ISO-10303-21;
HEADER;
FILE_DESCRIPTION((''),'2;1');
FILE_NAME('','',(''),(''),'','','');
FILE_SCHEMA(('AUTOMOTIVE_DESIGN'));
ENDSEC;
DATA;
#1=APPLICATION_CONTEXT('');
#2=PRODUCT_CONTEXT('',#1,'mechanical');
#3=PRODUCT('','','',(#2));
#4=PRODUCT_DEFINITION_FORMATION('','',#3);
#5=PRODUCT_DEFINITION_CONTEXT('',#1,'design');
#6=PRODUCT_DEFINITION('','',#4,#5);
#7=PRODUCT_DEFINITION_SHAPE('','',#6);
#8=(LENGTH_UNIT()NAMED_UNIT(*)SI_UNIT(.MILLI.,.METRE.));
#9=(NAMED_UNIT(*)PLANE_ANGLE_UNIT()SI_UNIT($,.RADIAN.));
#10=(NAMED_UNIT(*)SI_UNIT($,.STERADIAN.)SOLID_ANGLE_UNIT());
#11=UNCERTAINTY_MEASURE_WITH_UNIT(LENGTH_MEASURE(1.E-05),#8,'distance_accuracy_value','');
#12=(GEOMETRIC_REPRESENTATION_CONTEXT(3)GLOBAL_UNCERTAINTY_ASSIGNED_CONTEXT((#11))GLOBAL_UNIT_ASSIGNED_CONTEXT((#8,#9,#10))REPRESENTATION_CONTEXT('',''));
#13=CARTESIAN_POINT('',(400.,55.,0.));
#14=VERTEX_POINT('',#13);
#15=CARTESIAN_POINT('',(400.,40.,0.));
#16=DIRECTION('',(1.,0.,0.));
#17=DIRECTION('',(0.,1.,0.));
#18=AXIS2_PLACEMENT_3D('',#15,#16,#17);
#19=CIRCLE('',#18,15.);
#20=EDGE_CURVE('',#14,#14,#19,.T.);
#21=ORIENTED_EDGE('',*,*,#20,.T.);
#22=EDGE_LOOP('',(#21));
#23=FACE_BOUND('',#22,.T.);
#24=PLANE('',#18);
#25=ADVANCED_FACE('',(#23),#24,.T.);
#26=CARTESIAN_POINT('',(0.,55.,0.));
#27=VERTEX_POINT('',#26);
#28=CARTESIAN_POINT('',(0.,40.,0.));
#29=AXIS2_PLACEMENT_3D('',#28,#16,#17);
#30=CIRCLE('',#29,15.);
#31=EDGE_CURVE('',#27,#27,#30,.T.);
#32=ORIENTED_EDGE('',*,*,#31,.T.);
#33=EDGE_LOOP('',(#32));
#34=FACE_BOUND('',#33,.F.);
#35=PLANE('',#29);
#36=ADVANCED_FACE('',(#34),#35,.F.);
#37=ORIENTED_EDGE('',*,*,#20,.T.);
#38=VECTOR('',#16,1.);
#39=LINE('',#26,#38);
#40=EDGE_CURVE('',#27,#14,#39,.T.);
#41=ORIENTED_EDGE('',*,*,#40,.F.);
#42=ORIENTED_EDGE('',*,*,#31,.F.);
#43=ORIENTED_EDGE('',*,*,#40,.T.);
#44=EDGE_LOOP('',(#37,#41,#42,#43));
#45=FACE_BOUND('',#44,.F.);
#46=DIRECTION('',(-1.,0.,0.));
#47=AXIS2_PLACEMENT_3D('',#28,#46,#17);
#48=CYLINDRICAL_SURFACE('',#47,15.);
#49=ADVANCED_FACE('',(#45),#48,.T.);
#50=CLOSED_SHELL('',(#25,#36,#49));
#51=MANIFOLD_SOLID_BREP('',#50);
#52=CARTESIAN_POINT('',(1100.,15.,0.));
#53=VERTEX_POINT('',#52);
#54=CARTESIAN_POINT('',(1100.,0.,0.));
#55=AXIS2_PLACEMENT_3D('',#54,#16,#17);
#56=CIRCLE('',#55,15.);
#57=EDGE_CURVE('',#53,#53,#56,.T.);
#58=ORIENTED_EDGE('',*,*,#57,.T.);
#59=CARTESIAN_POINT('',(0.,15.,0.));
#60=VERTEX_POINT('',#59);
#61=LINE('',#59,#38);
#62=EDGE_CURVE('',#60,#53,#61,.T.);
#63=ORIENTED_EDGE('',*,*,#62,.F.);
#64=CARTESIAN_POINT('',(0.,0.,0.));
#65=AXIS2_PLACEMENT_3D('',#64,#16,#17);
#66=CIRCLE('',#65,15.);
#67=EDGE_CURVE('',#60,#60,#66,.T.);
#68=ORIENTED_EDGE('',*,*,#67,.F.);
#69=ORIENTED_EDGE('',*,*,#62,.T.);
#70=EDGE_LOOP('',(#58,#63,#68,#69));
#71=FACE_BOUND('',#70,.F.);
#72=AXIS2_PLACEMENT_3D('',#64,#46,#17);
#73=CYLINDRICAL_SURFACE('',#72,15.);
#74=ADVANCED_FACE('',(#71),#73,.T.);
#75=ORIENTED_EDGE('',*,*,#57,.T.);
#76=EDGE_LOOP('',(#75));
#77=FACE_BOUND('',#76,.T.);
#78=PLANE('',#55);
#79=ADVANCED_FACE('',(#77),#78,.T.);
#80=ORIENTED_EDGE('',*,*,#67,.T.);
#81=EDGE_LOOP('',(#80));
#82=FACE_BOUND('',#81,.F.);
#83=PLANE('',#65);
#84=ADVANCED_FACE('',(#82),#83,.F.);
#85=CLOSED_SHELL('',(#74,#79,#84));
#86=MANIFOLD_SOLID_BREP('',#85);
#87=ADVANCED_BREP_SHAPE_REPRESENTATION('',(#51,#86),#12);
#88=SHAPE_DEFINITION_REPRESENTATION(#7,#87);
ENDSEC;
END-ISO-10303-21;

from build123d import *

# Parameters (mm, degrees)
F0_R     = 15
F1_DEPTH = 1100
F2_DEPTH = 400


# Not quite as in the source:
# - a feature names something its author has since deleted; it is built from what else it names


with BuildPart() as f1:
    # F0 (on Right) → F1 (new body)
    with BuildSketch(Plane.YZ):
        Circle(F0_R)
    extrude(amount=F1_DEPTH)


with BuildPart() as f2:
    # F0 (on Right) → F2 (new body)
    with BuildSketch(Plane.YZ):
        with Locations((40, 0)):
            Circle(F0_R)
    extrude(amount=F2_DEPTH)


solid = Compound([f1.part, f2.part])
